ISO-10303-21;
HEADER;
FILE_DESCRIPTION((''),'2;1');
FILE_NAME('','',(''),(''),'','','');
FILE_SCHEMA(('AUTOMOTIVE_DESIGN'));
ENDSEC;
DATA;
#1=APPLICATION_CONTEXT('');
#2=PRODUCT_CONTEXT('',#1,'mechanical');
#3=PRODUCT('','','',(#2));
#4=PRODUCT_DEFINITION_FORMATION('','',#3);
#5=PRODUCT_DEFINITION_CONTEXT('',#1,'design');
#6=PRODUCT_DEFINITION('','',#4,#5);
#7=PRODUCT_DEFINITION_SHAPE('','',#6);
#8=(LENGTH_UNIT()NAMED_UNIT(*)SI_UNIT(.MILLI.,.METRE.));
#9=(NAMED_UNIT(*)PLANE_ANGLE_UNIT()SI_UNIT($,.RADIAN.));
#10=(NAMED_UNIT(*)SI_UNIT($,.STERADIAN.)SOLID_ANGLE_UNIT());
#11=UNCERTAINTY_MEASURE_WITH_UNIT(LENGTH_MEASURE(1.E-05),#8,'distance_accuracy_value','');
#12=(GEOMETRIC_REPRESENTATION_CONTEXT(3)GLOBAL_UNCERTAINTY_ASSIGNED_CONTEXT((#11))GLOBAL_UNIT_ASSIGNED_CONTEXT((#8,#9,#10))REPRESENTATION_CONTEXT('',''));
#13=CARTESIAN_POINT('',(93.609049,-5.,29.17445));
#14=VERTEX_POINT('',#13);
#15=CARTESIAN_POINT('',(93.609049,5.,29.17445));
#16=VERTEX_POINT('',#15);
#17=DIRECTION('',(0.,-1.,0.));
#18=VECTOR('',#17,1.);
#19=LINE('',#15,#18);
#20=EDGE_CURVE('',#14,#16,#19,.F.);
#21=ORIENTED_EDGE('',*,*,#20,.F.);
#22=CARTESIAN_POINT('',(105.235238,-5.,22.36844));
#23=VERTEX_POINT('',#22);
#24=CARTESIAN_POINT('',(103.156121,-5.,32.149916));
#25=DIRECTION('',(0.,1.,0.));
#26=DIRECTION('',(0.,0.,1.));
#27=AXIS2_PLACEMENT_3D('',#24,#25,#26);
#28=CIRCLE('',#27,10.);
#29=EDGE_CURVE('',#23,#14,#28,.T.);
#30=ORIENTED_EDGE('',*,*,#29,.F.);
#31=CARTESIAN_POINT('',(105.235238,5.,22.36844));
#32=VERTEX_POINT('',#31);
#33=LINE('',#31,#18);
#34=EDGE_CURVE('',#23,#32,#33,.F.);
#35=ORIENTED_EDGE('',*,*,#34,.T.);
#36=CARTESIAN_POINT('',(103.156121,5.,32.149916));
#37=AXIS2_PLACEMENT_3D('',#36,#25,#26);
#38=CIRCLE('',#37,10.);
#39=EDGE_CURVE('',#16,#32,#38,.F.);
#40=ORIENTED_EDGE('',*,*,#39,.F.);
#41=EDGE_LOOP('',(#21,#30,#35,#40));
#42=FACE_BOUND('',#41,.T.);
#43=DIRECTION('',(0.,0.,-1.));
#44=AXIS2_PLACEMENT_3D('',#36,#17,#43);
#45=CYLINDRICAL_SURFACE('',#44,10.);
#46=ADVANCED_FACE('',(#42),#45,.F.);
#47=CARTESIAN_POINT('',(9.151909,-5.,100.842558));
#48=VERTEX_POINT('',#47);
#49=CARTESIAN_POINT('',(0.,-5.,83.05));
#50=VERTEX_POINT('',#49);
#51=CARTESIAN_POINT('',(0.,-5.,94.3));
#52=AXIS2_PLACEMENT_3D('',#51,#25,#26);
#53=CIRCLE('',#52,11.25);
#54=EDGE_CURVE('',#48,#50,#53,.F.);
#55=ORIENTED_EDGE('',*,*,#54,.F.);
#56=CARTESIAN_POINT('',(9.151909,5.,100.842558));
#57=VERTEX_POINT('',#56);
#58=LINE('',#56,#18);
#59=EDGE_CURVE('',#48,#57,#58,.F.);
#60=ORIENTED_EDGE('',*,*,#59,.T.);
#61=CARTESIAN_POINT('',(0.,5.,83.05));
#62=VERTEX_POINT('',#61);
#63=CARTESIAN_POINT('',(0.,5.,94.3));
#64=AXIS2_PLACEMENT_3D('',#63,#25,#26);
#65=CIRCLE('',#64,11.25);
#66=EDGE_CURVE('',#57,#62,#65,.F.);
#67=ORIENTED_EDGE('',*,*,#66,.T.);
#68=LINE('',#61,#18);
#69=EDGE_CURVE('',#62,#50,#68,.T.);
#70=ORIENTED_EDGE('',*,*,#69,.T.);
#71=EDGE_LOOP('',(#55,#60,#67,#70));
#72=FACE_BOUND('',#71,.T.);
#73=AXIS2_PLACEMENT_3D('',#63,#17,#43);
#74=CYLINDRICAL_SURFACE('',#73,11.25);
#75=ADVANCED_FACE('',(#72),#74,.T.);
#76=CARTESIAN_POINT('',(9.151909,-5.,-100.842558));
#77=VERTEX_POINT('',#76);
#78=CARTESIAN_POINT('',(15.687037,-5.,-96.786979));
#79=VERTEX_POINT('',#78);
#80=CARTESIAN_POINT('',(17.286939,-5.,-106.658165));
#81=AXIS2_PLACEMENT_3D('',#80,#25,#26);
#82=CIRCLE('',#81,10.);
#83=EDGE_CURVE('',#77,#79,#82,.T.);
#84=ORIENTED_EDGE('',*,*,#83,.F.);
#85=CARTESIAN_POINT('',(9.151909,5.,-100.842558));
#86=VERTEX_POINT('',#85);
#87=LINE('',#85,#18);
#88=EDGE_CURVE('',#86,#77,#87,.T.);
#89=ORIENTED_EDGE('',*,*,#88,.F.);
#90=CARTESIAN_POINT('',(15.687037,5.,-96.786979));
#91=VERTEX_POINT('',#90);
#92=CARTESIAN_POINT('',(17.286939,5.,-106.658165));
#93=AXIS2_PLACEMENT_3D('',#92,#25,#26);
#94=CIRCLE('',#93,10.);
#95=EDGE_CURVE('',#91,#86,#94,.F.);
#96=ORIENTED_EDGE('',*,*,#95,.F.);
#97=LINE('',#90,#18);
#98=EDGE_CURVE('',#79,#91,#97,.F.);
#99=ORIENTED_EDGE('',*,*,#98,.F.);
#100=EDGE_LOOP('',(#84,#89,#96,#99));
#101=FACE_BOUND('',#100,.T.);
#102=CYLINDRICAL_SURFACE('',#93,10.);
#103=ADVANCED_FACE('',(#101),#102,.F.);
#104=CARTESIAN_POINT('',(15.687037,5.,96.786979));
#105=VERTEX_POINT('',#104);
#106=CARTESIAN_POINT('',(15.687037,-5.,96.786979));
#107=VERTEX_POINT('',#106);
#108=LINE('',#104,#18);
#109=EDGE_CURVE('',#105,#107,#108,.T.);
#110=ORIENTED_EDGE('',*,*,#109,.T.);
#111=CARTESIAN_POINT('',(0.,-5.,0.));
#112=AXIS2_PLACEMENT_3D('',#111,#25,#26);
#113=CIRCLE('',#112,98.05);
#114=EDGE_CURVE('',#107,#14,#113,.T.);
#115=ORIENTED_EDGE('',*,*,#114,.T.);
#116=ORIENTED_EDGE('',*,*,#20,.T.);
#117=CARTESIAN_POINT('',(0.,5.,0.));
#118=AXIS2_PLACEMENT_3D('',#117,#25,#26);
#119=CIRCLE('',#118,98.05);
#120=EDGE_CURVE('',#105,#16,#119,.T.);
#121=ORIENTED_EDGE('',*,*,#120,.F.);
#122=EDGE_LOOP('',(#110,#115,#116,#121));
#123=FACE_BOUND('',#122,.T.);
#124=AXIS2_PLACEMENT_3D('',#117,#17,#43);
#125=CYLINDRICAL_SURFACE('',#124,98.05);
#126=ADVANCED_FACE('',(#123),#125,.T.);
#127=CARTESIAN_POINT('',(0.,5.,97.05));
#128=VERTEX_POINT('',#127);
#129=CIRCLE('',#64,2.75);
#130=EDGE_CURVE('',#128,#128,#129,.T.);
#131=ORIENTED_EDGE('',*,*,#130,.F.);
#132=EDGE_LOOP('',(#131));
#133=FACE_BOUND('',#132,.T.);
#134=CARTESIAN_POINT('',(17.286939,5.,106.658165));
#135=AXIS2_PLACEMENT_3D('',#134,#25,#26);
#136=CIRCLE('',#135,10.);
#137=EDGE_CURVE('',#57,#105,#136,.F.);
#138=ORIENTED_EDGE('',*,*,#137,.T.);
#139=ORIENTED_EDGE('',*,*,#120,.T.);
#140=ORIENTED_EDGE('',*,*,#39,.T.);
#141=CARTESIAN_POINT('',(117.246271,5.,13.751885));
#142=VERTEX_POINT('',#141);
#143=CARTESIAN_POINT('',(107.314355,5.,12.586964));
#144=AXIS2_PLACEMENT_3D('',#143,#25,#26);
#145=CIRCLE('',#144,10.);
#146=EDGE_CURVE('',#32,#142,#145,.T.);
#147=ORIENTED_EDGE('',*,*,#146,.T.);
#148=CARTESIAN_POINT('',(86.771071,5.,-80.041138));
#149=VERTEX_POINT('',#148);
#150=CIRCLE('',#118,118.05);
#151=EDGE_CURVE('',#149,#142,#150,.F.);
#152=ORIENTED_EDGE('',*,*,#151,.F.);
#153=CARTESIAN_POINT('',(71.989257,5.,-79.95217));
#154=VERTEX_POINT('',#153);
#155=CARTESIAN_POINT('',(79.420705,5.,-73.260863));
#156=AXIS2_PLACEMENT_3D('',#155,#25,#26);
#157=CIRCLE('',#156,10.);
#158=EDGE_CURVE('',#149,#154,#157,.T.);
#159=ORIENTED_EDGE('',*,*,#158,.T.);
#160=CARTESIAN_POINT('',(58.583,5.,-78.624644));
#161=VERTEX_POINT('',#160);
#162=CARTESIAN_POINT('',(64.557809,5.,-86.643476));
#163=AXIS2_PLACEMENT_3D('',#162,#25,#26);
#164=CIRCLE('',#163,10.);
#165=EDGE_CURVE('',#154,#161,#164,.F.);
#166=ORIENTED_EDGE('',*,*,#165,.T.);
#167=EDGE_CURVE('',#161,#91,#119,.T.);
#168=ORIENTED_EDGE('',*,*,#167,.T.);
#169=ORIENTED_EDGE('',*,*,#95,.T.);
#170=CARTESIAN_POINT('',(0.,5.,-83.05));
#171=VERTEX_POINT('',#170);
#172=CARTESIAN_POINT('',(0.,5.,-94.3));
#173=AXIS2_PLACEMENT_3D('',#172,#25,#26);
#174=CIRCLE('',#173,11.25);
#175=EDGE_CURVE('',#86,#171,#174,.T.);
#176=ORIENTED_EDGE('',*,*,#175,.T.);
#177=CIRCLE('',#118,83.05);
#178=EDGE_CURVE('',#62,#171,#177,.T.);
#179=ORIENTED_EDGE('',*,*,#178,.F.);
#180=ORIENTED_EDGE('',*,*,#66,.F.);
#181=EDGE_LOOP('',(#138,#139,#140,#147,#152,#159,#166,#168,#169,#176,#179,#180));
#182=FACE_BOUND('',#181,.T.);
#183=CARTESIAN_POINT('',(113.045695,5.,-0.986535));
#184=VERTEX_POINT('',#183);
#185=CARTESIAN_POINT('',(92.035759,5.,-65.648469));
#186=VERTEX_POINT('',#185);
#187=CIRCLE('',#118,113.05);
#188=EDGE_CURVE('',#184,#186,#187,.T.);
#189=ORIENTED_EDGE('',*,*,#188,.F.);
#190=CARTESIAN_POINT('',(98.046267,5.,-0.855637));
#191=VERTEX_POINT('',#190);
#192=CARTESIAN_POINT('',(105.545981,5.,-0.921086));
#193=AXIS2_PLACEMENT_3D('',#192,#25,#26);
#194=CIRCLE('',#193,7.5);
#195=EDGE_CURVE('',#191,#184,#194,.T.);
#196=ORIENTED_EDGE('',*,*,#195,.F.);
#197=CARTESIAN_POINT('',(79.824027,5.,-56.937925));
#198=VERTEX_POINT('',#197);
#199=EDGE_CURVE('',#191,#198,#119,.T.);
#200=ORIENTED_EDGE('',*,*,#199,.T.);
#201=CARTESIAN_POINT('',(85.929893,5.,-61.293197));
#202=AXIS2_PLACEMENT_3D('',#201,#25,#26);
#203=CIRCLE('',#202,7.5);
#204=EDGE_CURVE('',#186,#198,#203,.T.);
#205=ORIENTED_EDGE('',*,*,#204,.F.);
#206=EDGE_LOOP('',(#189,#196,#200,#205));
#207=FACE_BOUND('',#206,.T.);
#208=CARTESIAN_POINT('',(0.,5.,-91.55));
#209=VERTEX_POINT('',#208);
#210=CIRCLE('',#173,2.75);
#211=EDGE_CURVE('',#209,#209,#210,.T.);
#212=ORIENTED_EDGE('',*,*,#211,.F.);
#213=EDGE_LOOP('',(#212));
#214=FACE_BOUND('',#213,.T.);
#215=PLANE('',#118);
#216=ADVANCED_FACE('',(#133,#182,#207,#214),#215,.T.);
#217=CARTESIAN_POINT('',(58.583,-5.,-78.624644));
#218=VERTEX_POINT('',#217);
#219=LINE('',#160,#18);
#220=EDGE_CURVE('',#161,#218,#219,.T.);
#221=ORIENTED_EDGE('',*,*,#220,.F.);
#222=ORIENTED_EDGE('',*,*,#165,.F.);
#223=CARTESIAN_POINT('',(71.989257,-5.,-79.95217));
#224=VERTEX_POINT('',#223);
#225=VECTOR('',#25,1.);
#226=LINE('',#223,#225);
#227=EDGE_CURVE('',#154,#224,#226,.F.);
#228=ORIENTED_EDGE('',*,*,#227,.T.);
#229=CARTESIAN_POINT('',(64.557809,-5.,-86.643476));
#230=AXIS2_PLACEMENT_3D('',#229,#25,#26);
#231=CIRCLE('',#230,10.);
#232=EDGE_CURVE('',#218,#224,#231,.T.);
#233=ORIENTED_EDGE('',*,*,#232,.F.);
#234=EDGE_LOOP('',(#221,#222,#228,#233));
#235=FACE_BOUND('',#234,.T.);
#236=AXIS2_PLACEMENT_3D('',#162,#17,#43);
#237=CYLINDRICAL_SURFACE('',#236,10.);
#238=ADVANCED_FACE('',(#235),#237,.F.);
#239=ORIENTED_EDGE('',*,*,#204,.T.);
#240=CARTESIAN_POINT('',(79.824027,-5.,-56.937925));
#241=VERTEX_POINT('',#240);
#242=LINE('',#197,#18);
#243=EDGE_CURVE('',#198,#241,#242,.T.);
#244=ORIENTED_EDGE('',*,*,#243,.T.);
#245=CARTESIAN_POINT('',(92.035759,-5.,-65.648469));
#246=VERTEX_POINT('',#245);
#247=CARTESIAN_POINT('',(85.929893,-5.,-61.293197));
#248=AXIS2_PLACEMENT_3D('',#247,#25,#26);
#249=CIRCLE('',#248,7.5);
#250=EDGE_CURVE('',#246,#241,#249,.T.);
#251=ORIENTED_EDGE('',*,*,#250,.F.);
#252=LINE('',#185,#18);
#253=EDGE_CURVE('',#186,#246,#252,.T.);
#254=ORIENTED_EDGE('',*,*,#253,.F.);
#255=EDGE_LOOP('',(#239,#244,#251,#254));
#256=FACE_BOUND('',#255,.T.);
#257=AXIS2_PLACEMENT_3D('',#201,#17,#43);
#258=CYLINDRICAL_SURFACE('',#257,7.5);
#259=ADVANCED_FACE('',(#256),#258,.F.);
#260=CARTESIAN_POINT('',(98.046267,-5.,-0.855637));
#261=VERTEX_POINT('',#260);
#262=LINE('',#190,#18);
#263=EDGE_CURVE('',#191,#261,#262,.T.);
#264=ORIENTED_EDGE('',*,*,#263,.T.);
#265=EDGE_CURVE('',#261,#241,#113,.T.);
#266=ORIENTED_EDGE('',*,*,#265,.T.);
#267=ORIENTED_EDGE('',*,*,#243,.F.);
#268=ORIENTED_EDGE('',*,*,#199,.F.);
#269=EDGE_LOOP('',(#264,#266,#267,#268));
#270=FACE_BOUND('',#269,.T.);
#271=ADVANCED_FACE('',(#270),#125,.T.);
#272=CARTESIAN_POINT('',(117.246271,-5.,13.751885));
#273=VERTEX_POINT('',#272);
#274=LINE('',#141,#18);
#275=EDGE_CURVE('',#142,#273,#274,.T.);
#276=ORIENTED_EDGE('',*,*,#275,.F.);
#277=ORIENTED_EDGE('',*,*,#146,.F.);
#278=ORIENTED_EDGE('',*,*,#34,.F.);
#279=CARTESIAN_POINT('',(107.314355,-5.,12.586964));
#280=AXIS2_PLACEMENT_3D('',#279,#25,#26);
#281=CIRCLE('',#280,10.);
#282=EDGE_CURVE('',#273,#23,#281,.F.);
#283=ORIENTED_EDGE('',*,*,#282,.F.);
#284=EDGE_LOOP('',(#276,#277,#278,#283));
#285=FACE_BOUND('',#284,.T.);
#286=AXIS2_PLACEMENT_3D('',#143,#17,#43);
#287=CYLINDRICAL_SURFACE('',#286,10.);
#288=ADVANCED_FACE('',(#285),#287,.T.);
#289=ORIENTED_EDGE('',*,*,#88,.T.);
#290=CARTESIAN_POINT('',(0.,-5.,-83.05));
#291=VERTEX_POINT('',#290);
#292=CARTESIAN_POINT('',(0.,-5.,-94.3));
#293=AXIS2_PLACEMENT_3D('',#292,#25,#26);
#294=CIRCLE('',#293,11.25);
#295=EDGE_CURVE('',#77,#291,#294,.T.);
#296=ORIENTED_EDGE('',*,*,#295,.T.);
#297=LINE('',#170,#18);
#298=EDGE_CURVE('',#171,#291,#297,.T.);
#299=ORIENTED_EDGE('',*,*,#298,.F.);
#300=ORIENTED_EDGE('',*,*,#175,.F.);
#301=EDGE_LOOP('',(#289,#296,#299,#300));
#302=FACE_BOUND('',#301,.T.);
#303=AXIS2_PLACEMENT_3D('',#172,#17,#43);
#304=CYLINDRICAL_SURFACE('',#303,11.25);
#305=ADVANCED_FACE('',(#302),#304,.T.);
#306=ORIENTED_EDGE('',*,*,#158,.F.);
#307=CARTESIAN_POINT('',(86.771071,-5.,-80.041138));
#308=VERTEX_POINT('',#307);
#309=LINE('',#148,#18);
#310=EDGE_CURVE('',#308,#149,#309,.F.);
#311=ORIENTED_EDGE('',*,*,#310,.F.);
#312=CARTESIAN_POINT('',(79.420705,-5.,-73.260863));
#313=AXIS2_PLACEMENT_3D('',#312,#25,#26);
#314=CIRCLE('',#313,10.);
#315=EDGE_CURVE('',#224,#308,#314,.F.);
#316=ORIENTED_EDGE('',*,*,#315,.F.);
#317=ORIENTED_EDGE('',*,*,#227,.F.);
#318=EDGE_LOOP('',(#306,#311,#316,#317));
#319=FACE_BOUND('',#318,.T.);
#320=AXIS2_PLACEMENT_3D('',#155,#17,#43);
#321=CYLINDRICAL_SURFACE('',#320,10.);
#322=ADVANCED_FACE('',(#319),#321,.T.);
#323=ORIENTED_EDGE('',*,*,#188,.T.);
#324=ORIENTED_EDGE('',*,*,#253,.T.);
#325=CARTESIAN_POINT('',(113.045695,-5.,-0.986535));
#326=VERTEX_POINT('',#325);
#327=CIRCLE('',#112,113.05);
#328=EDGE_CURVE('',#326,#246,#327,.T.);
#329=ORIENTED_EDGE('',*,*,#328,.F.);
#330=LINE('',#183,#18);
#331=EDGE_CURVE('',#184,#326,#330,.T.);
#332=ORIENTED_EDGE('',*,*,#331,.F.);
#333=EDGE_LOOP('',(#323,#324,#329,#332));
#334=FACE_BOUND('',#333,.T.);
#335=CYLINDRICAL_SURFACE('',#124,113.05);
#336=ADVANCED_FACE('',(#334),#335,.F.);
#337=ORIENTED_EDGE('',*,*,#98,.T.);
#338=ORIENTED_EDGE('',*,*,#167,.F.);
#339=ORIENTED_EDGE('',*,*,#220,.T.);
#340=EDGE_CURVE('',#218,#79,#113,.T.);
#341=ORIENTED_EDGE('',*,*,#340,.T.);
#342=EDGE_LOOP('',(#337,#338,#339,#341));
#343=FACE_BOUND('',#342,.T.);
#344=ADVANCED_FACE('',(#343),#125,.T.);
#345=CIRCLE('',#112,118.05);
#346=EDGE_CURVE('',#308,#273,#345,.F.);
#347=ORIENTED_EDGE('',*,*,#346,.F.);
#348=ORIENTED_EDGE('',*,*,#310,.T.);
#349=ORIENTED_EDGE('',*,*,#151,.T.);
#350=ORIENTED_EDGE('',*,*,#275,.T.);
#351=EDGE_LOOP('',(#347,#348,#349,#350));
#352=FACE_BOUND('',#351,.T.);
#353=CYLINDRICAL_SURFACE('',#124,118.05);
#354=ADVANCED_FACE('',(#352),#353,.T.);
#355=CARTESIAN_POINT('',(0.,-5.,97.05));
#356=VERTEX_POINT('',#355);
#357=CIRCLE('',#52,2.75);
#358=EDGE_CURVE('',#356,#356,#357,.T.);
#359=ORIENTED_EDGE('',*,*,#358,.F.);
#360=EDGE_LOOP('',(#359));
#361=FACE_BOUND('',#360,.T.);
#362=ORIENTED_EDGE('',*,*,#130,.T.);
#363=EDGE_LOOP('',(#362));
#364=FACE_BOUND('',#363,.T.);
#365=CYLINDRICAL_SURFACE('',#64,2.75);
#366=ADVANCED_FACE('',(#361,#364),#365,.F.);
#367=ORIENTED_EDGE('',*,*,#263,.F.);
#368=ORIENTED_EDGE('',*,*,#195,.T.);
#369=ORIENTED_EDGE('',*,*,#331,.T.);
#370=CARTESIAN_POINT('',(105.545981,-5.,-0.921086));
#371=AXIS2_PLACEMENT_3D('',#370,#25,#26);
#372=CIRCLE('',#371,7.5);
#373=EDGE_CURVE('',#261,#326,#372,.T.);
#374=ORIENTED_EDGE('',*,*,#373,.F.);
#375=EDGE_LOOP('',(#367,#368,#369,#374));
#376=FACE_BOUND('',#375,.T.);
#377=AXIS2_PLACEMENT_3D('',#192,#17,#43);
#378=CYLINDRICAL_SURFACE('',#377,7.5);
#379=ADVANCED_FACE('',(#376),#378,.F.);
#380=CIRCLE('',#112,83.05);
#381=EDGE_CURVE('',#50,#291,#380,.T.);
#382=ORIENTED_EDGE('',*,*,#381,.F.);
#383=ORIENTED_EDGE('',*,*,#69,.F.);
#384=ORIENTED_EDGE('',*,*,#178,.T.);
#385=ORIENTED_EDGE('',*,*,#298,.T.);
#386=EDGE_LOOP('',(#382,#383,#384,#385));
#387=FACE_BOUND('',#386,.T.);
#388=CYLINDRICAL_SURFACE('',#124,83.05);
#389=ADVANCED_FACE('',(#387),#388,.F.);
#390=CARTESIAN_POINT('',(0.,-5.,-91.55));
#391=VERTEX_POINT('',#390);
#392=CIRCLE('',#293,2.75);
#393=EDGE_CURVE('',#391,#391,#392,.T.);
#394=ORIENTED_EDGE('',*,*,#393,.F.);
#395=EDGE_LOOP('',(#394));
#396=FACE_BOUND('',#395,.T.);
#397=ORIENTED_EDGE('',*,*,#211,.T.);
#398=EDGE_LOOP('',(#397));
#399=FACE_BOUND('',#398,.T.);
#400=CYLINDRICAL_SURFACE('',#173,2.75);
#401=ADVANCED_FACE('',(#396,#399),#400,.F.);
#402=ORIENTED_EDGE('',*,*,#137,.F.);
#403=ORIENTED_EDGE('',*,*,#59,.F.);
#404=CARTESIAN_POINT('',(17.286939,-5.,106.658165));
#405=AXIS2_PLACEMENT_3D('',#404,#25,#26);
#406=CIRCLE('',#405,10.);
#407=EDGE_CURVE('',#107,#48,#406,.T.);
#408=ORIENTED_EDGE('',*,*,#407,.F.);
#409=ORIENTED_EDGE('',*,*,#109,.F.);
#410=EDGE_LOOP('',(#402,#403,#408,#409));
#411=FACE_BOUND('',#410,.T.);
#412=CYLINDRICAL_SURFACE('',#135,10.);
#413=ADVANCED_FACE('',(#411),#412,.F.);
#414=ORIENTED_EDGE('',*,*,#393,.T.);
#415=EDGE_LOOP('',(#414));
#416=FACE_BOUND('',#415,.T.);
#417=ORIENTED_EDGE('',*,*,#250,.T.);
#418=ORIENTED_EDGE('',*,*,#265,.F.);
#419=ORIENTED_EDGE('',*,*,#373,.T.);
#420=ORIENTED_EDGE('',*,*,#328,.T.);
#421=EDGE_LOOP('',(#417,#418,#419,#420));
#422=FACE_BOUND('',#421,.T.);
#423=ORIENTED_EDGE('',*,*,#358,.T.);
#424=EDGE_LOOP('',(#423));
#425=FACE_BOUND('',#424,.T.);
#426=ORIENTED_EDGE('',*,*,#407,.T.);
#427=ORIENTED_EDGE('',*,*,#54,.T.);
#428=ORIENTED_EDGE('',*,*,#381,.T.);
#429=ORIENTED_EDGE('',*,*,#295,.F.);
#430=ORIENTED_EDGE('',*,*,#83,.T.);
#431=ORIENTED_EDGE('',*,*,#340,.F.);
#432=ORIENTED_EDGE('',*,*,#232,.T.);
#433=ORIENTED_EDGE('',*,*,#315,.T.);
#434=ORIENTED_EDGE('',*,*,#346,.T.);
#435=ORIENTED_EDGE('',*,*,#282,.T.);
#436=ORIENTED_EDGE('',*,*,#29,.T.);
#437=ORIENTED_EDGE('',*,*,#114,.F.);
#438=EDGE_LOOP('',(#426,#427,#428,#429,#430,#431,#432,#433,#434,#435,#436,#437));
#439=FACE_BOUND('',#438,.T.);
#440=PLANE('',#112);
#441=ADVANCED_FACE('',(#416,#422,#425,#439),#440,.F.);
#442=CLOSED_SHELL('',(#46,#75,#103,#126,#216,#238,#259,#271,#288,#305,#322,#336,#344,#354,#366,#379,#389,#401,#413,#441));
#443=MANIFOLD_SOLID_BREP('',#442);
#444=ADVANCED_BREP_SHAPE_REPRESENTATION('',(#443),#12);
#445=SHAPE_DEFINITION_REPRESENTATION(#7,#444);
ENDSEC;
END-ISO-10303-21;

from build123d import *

# Parameters (mm, degrees)
BOSS_EXTRUDE1_DEPTH  = 5
M5_CLEARANCE_HOLE1_D = 5.5
FILLET1_R            = 10


with BuildPart() as part:
    # Sketch1 → Boss-Extrude1 (new, symmetric)
    with BuildSketch(Plane(origin=(0, 0, 0), x_dir=(1, 0, 0), z_dir=(0, 1, 0))):
        with BuildLine():
            ThreePointArc((115.470324267, -24.543975101), (112.272221749, 36.479456186), (78.990868081, 87.728246648))
            Line((78.990868081, 87.728246648), (65.608255953, 72.865350138))
            ThreePointArc((65.608255953, 72.865350138), (40.133036877, 89.460280857), (10.798978706, 97.45349947))
            ThreePointArc((10.798978706, 97.45349947), (-9.001093518, 101.04854173), (0, 83.05))
            ThreePointArc((0, 83.05), (83.05, 0), (0, -83.05))
            ThreePointArc((0, -83.05), (-9.001093518, -101.04854173), (10.798978706, -97.45349947))
            ThreePointArc((10.798978706, -97.45349947), (65.813533347, -72.679992628), (95.907372252, -20.385741285))
            Line((95.907372252, -20.385741285), (115.470324267, -24.543975101))
        make_face()
        with BuildLine():
            ThreePointArc((113.045695402, 0.986534838), (105.611429996, -6.578628601), (98.046266556, 0.855636806))
            ThreePointArc((98.046266556, 0.855636806), (93.251091423, 30.299116298), (79.824026575, 56.937924807))
            ThreePointArc((79.824026575, 56.937924807), (81.574620795, 67.399063363), (92.03575935, 65.648469143))
            ThreePointArc((92.03575935, 65.648469143), (107.516939167, 34.934371214), (113.045695402, 0.986534838))
        make_face(mode=Mode.SUBTRACT)
    extrude(amount=BOSS_EXTRUDE1_DEPTH, both=True)

    # M5 Clearance Hole1 (through all)
    with Locations(Plane(origin=(0, 5, 0), x_dir=(1, 0, 0), z_dir=(0, 1, 0))):
        with Locations((0, -94.3), (0, 94.3)):
            Hole(M5_CLEARANCE_HOLE1_D / 2)

    # Fillet1
    # the kernel refuses this fillet: 10 mm, written as the material it adds along each edge
    with BuildSketch(Plane(origin=(10.798978706, 5, 97.45349947), x_dir=(0.990831071127436, 0, -0.13510658195831074), z_dir=(0, -1, 0)), Plane(origin=(10.798978706, -5, -97.45349947), x_dir=(0.990831071127436, 0, 0.13510658195831213), z_dir=(0, 1, 0))) as fillet1_piece_1:
        with BuildLine():
            CenterArc((5.184861326, 9.996835122), FILLET1_R, 223.325173882, 45.233283105)
            ThreePointArc((-2.089852288, 3.13545466), (-0.912718127, 1.655846999), (0, 0))
            ThreePointArc((0, 0), (2.466645575, 0.031031634), (4.93329115, 0))
        make_face()
    extrude(amount=10)
    with BuildSketch(Plane(origin=(65.608255953, -5, -72.865350138), x_dir=(0.6691306063588537, 0, -0.7431448254773984), z_dir=(0, 1, 0)), Plane(origin=(95.907372252, 5, 20.385741285), x_dir=(0.9781476007338056, 0, 0.20791169081775965), z_dir=(0, -1, 0))) as fillet1_piece_2:
        with BuildLine():
            CenterArc((9.536256092, 10), FILLET1_R, 185.31030916, 84.68969084)
            ThreePointArc((-0.420824527, 9.074502545), (-0.105262635, 4.542127523), (0, 0))
            Line((0, 0), (9.536256092, 0))
        make_face()
    extrude(amount=10)
    # the kernel refuses this fillet: 10 mm, written as the material it takes off along each edge
    with BuildSketch(Plane(origin=(78.990868081, -32.343098115, -87.728246648), x_dir=(0.7113498032891118, 0, 0.7028381444973957), z_dir=(0, 1, 0))) as fillet1_2_piece_1:
        with BuildLine():
            CenterArc((10.473993196, -9.989264392), FILLET1_R, 87.34484542, 95.31030916)
            Line((0.484728804, -10.452510442), (0, 0))
            ThreePointArc((0, 0), (5.468619623, 0.12673385), (10.937239246, 0))
        make_face()
    extrude(amount=64.68619623, mode=Mode.SUBTRACT)
    with BuildSketch(Plane(origin=(115.470324267, -32.343098115, 24.543975101), x_dir=(-0.9781476007338059, 0, -0.2079116908177584), z_dir=(0, 1, 0))) as fillet1_2_piece_2:
        with BuildLine():
            CenterArc((10.463743908, -10), FILLET1_R, 90, 95.31030916)
            ThreePointArc((0.506663288, -10.925497455), (0.12673385, -5.468619623), (0, 0))
            Line((0, 0), (10.463743908, 0))
        make_face()
    extrude(amount=64.68619623, mode=Mode.SUBTRACT)


solid = part.part
